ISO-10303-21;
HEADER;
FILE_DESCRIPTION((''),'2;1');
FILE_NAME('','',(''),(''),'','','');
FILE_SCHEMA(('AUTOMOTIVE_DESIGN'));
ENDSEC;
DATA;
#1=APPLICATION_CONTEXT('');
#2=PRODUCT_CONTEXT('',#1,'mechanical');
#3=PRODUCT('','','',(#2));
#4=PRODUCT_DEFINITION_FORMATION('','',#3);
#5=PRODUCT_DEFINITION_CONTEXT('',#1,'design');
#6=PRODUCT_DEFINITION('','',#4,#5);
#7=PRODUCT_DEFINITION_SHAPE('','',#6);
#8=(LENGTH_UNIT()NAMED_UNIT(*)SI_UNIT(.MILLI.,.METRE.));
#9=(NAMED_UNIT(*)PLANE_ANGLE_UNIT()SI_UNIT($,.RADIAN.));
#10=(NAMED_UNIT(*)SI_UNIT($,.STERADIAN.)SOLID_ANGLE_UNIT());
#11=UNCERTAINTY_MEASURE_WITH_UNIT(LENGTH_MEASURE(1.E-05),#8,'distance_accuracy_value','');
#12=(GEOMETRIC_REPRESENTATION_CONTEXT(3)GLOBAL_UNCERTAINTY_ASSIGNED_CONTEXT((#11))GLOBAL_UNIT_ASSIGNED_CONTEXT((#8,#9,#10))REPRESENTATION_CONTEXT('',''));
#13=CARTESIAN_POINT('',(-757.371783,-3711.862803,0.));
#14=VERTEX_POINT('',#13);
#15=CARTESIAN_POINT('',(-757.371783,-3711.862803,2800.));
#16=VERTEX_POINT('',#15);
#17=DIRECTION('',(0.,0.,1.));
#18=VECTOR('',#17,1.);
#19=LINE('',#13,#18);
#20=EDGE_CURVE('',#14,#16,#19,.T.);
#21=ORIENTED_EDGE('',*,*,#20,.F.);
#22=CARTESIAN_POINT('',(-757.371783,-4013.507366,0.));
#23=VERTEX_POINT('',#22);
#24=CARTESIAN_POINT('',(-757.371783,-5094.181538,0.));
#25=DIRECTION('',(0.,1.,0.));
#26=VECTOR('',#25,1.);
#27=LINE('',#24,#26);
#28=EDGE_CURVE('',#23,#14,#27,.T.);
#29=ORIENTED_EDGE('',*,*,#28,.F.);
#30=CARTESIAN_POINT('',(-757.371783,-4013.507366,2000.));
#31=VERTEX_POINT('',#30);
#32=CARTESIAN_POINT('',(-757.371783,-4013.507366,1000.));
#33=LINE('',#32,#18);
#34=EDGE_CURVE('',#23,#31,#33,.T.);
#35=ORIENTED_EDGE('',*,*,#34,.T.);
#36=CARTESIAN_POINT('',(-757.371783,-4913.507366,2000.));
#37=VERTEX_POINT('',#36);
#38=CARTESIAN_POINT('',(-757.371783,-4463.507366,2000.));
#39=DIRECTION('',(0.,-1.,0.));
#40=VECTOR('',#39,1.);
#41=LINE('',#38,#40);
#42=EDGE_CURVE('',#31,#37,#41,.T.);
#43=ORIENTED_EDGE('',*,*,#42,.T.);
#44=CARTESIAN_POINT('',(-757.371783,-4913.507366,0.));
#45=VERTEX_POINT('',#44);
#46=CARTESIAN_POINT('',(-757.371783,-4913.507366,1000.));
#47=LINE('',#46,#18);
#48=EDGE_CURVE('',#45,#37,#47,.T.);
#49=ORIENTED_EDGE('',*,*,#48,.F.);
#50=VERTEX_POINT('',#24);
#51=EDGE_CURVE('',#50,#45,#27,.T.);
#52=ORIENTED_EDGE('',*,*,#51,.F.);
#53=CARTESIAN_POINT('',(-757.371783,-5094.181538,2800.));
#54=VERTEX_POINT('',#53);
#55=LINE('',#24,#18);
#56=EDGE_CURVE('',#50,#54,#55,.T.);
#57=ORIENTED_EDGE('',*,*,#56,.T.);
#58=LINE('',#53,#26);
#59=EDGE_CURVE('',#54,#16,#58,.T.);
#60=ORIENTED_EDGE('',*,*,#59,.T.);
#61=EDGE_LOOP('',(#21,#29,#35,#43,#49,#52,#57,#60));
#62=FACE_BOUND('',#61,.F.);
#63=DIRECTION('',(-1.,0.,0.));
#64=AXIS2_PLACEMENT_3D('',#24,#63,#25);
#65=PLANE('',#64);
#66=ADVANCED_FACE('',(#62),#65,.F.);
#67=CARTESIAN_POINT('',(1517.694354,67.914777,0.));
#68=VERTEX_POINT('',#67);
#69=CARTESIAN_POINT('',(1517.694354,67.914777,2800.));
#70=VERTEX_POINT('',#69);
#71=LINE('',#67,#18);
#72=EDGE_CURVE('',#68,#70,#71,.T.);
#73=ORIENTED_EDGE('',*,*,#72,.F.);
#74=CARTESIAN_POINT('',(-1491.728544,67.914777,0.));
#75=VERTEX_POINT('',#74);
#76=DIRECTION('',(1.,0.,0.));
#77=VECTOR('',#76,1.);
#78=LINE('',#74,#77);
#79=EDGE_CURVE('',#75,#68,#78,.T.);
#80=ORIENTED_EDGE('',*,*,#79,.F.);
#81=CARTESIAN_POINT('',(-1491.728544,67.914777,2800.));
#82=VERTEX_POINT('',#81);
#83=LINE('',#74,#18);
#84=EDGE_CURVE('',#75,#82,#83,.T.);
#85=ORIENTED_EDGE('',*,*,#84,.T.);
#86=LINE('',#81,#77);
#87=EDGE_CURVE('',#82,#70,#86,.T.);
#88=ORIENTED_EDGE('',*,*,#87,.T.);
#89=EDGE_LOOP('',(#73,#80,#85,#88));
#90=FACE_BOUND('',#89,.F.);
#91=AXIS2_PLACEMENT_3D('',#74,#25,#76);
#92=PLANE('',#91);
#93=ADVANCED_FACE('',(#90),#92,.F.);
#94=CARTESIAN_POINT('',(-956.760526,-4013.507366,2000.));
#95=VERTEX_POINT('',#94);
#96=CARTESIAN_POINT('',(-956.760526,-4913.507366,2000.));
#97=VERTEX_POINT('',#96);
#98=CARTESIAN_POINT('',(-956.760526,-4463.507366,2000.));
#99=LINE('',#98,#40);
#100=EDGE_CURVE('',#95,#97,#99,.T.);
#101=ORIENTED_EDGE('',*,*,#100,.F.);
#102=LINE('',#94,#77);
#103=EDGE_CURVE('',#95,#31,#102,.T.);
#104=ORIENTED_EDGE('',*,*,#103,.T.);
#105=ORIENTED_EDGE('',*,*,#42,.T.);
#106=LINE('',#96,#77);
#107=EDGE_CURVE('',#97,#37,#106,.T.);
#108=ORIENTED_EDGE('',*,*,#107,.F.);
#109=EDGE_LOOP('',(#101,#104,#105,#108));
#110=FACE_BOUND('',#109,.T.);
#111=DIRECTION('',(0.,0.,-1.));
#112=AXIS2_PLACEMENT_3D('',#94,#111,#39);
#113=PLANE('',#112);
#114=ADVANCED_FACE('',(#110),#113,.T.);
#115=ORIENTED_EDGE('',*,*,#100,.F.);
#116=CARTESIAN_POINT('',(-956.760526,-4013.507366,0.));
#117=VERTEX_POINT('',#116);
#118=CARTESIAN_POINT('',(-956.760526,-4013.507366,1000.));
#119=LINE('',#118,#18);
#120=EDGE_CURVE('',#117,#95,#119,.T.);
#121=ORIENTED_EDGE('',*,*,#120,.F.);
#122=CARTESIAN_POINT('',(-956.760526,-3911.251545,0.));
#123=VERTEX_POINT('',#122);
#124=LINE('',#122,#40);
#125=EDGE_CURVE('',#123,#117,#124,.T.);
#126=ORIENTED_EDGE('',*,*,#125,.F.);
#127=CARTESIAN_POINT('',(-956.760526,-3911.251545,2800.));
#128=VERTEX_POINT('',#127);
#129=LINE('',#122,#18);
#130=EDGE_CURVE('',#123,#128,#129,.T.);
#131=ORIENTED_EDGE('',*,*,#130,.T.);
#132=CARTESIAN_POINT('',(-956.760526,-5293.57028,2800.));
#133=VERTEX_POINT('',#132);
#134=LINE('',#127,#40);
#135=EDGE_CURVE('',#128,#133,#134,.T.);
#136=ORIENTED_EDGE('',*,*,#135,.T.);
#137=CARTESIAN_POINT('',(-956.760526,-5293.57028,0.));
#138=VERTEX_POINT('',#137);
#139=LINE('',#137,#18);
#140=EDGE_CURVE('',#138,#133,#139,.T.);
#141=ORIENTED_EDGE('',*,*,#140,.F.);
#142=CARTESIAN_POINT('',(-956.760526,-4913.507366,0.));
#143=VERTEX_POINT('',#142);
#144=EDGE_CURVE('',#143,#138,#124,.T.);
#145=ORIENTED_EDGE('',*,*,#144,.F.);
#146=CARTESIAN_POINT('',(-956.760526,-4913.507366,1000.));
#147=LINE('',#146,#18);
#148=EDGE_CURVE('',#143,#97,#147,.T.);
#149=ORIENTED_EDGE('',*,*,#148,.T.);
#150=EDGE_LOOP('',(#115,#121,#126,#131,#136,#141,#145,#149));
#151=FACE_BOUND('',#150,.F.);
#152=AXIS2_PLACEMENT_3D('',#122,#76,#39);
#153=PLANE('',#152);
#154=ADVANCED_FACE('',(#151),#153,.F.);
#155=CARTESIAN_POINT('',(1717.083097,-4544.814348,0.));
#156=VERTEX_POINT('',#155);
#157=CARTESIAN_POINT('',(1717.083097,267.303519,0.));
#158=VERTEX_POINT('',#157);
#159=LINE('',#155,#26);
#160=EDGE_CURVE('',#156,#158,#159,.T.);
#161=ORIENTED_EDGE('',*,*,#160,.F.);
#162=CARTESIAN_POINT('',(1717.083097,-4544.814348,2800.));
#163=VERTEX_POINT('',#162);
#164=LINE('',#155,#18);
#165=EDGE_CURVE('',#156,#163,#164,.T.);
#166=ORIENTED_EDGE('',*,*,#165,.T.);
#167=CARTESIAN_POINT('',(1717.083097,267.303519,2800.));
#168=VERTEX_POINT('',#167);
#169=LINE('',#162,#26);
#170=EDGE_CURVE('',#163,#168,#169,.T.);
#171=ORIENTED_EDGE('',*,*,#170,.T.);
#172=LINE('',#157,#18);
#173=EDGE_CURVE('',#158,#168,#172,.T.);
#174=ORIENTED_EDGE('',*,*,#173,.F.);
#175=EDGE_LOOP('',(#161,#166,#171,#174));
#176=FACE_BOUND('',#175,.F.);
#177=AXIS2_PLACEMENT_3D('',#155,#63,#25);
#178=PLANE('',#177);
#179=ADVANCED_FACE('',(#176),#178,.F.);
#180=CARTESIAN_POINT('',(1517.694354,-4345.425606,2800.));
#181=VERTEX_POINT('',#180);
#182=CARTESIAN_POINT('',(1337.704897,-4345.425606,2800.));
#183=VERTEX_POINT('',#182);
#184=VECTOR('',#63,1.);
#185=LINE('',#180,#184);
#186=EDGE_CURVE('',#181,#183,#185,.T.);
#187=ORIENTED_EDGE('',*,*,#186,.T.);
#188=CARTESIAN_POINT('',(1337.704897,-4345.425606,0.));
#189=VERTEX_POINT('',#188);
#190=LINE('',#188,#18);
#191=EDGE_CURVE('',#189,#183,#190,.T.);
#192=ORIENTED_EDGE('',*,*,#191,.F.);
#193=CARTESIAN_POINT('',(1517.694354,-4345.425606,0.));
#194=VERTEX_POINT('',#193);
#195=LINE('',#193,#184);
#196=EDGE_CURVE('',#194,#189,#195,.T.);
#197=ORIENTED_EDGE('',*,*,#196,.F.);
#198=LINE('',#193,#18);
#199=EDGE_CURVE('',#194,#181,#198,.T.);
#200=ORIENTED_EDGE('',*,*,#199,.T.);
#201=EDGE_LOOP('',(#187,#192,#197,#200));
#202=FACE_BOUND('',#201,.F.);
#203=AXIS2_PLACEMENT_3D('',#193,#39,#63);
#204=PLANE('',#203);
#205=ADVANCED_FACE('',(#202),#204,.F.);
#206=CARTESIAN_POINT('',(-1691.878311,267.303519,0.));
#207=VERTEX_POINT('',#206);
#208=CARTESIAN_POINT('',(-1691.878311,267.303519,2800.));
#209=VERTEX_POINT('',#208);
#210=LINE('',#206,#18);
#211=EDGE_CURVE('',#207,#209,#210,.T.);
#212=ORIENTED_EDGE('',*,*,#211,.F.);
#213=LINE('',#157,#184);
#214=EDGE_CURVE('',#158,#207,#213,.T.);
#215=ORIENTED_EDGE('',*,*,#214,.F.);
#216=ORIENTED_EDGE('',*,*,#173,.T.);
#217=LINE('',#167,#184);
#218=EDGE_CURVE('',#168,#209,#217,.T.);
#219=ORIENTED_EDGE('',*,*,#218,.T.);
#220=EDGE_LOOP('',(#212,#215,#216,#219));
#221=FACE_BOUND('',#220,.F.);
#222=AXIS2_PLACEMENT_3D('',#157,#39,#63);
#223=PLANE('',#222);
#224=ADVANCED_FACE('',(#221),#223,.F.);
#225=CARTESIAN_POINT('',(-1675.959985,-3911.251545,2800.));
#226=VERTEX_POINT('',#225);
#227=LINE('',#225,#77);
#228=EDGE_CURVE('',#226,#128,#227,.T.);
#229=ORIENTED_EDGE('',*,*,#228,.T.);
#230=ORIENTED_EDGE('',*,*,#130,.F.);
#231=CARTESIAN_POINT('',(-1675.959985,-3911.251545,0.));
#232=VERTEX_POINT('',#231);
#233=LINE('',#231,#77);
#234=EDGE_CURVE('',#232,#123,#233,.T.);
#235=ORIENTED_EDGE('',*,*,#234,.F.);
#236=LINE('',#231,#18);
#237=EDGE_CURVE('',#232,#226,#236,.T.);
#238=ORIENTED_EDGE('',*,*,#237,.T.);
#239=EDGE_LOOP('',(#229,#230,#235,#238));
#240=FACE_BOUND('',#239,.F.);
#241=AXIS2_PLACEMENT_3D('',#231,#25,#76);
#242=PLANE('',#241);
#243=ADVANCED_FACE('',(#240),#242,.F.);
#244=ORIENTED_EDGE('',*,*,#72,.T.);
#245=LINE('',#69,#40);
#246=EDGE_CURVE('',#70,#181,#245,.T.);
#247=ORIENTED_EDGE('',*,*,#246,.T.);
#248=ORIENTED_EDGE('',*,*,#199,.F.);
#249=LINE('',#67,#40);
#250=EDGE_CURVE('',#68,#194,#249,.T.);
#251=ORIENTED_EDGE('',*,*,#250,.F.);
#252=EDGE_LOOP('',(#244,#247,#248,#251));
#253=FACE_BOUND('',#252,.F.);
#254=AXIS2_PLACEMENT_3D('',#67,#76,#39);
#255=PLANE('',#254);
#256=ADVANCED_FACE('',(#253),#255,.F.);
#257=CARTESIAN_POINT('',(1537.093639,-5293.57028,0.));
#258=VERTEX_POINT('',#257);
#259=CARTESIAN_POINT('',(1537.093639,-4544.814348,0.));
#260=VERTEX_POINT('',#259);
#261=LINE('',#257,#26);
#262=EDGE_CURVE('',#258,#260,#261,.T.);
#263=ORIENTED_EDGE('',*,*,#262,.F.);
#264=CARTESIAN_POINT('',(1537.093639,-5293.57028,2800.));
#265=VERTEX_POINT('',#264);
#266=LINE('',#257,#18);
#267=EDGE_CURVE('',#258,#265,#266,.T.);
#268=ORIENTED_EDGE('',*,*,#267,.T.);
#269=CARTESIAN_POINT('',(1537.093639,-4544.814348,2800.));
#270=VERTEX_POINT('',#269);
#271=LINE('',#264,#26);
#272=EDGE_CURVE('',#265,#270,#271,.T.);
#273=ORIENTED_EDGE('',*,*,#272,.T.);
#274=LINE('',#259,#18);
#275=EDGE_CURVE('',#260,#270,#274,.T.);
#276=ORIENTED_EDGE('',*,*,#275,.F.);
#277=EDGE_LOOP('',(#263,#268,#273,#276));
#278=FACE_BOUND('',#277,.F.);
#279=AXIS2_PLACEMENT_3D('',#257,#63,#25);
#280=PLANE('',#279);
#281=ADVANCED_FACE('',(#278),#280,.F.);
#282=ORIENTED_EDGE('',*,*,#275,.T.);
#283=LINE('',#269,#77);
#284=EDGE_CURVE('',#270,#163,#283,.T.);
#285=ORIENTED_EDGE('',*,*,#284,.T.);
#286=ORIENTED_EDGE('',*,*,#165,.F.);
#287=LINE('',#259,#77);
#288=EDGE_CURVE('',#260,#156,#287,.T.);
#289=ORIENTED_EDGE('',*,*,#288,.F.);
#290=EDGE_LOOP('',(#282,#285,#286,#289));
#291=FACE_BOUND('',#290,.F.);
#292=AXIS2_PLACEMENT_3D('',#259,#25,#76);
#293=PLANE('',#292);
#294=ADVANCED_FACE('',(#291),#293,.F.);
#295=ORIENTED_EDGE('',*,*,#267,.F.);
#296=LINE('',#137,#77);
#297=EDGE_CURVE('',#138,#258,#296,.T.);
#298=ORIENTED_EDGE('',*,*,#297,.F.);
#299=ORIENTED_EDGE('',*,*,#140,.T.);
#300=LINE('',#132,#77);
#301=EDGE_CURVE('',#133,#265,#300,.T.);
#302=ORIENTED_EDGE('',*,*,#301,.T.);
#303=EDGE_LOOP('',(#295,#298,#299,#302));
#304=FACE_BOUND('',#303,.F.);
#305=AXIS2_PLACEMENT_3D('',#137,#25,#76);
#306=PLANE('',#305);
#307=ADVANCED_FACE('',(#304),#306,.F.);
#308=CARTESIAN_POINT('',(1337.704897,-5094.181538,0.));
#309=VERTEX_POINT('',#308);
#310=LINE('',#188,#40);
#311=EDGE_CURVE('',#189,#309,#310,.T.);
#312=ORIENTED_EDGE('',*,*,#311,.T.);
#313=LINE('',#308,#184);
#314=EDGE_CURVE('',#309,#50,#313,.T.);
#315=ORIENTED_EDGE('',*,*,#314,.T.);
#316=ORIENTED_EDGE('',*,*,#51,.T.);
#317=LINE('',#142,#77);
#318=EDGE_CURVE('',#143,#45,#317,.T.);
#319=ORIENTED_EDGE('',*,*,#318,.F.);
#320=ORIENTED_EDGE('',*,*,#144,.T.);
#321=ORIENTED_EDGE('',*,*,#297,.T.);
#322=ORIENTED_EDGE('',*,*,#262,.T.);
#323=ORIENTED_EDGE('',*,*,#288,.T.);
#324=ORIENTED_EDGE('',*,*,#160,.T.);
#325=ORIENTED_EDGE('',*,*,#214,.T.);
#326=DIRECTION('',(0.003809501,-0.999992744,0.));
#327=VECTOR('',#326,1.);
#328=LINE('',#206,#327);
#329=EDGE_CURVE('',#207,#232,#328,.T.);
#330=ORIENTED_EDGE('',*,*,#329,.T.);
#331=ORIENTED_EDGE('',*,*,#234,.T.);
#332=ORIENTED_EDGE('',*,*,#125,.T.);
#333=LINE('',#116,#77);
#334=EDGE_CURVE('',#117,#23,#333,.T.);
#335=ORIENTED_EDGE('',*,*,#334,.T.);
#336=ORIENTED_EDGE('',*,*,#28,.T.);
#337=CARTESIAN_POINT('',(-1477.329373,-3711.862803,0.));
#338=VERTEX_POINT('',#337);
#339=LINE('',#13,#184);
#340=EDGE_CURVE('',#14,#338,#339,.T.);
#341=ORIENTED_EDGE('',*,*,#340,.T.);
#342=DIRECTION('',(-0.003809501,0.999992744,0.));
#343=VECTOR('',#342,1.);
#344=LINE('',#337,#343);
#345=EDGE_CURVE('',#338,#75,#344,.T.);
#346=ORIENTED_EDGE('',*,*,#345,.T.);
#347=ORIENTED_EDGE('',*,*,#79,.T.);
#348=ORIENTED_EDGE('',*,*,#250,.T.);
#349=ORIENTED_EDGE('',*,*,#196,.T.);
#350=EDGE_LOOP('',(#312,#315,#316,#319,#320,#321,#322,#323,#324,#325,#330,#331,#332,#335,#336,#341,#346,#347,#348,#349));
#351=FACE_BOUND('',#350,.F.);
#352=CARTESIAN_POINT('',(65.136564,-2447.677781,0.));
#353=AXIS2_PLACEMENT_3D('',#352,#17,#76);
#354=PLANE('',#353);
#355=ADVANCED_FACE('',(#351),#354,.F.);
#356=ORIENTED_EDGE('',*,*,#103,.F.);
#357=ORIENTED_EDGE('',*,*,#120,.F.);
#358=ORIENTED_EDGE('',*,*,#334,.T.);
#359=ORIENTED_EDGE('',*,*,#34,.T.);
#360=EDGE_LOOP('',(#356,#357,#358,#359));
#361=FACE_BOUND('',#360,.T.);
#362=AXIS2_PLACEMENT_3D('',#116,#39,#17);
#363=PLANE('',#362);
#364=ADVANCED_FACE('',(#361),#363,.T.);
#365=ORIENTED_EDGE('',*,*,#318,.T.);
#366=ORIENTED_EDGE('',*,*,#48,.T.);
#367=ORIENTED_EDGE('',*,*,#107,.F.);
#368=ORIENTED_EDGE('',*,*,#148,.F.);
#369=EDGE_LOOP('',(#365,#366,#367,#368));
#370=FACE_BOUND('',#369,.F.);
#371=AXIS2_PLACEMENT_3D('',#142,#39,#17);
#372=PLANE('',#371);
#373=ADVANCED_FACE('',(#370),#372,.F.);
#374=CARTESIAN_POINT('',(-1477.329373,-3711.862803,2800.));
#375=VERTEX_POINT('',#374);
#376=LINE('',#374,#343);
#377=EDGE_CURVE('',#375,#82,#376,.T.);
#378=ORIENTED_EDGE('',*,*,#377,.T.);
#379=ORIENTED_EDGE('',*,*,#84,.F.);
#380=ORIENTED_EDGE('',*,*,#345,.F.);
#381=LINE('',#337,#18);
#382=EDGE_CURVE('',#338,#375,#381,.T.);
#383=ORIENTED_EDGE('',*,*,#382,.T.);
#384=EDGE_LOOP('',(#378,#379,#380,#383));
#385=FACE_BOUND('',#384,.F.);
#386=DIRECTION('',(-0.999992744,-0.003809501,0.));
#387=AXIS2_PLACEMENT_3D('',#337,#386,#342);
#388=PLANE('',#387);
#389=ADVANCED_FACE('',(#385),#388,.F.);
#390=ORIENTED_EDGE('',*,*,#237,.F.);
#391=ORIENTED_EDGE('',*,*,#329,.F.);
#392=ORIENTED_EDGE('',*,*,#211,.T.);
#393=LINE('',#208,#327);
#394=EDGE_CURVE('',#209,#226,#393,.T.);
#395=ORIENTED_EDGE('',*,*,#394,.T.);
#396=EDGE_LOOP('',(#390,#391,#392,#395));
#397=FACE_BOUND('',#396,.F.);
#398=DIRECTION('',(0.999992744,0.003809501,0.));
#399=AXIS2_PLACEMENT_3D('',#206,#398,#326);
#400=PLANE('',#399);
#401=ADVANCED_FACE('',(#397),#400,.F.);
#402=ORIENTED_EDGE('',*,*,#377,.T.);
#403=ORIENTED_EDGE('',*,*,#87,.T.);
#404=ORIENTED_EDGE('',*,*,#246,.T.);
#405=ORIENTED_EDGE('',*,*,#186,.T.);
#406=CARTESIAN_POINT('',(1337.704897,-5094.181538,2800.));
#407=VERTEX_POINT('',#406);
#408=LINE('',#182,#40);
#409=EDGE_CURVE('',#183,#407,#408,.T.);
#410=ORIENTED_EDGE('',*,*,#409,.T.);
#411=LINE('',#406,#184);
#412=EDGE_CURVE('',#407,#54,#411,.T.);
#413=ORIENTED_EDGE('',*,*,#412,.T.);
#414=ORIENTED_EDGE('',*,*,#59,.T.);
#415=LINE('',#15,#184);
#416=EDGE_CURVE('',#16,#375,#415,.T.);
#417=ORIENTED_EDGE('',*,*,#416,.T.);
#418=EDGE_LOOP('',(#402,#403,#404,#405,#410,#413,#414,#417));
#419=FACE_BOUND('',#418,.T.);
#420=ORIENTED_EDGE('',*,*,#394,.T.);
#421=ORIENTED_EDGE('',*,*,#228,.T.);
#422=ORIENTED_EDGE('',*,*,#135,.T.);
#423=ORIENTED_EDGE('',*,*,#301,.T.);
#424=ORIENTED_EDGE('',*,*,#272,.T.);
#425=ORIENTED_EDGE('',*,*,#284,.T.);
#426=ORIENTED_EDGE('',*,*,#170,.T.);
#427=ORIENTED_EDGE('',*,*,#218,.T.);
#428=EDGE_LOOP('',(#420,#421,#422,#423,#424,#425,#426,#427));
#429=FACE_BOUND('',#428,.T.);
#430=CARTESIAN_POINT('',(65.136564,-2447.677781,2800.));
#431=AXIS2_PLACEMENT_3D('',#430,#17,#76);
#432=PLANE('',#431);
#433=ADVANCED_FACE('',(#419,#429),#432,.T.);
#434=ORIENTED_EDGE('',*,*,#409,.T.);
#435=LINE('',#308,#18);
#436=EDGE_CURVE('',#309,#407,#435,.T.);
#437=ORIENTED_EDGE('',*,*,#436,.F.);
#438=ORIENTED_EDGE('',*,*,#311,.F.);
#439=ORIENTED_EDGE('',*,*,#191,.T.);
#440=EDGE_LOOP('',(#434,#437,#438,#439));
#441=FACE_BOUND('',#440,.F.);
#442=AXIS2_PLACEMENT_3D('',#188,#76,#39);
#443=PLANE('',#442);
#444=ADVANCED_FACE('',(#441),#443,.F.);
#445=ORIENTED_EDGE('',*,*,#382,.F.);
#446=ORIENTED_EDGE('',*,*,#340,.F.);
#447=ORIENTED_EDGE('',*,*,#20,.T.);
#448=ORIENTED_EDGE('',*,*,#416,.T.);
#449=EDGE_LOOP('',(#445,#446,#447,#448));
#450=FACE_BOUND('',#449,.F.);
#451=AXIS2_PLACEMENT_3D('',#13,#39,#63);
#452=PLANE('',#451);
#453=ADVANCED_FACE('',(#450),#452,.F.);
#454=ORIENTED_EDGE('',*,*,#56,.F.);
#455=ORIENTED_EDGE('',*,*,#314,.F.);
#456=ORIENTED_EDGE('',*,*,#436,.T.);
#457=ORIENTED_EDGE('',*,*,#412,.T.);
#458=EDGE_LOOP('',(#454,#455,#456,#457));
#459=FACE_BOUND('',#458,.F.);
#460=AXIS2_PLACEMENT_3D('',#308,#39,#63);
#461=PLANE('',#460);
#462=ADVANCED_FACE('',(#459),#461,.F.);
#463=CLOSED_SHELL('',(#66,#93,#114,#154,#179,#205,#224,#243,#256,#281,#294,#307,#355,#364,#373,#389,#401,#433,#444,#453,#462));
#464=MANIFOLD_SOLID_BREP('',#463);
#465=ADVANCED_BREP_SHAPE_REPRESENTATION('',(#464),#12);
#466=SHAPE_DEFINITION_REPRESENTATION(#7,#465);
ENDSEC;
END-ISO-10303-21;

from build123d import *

# Parameters (mm, degrees)
F1_DEPTH = 2800
F2_W     = 900
F2_H     = 2000
F3_DEPTH = 199.3887424469


# Not quite as in the source:
# - a feature of the source that left no trace in its solid (it failed there, or was rolled back) is left out


with BuildPart() as f1:
    # F0 (on Top) → F1 (new body)
    with BuildSketch(Plane.XY):
        Polygon((1537.0936393738, -5293.5702800751), (1537.0936393738, -4544.8143482208), (1717.0830965042, -4544.8143482208), (1717.0830965042, 267.3035189509), (-1691.8783106137, 267.3035189509), (-1675.9599854953, -3911.2515449524), (-956.7605257034, -3911.2515449524), (-956.7605257034, -5293.5702800751), align=None)
        Polygon((-757.3717832565, -3711.8628025055), (-1477.3293733597, -3711.8628025055), (-1491.7285442352, 67.914776504), (1517.6943540573, 67.914776504), (1517.6943540573, -4345.4256057739), (1337.7048969269, -4345.4256057739), (1337.7048969269, -5094.1815376282), (-757.3717832565, -5094.1815376282), align=None, mode=Mode.SUBTRACT)
    extrude(amount=F1_DEPTH)

    # F2 (on face) → F3 (cut, through all)
    with BuildSketch(Plane(origin=(-956.7605257034, 0, 0), x_dir=(0, -1, 0), z_dir=(-1, 0, 0))):
        with Locations((4463.5073661804, 1000)):
            Rectangle(F2_W, F2_H)
    extrude(amount=-F3_DEPTH, mode=Mode.SUBTRACT)


solid = f1.part
